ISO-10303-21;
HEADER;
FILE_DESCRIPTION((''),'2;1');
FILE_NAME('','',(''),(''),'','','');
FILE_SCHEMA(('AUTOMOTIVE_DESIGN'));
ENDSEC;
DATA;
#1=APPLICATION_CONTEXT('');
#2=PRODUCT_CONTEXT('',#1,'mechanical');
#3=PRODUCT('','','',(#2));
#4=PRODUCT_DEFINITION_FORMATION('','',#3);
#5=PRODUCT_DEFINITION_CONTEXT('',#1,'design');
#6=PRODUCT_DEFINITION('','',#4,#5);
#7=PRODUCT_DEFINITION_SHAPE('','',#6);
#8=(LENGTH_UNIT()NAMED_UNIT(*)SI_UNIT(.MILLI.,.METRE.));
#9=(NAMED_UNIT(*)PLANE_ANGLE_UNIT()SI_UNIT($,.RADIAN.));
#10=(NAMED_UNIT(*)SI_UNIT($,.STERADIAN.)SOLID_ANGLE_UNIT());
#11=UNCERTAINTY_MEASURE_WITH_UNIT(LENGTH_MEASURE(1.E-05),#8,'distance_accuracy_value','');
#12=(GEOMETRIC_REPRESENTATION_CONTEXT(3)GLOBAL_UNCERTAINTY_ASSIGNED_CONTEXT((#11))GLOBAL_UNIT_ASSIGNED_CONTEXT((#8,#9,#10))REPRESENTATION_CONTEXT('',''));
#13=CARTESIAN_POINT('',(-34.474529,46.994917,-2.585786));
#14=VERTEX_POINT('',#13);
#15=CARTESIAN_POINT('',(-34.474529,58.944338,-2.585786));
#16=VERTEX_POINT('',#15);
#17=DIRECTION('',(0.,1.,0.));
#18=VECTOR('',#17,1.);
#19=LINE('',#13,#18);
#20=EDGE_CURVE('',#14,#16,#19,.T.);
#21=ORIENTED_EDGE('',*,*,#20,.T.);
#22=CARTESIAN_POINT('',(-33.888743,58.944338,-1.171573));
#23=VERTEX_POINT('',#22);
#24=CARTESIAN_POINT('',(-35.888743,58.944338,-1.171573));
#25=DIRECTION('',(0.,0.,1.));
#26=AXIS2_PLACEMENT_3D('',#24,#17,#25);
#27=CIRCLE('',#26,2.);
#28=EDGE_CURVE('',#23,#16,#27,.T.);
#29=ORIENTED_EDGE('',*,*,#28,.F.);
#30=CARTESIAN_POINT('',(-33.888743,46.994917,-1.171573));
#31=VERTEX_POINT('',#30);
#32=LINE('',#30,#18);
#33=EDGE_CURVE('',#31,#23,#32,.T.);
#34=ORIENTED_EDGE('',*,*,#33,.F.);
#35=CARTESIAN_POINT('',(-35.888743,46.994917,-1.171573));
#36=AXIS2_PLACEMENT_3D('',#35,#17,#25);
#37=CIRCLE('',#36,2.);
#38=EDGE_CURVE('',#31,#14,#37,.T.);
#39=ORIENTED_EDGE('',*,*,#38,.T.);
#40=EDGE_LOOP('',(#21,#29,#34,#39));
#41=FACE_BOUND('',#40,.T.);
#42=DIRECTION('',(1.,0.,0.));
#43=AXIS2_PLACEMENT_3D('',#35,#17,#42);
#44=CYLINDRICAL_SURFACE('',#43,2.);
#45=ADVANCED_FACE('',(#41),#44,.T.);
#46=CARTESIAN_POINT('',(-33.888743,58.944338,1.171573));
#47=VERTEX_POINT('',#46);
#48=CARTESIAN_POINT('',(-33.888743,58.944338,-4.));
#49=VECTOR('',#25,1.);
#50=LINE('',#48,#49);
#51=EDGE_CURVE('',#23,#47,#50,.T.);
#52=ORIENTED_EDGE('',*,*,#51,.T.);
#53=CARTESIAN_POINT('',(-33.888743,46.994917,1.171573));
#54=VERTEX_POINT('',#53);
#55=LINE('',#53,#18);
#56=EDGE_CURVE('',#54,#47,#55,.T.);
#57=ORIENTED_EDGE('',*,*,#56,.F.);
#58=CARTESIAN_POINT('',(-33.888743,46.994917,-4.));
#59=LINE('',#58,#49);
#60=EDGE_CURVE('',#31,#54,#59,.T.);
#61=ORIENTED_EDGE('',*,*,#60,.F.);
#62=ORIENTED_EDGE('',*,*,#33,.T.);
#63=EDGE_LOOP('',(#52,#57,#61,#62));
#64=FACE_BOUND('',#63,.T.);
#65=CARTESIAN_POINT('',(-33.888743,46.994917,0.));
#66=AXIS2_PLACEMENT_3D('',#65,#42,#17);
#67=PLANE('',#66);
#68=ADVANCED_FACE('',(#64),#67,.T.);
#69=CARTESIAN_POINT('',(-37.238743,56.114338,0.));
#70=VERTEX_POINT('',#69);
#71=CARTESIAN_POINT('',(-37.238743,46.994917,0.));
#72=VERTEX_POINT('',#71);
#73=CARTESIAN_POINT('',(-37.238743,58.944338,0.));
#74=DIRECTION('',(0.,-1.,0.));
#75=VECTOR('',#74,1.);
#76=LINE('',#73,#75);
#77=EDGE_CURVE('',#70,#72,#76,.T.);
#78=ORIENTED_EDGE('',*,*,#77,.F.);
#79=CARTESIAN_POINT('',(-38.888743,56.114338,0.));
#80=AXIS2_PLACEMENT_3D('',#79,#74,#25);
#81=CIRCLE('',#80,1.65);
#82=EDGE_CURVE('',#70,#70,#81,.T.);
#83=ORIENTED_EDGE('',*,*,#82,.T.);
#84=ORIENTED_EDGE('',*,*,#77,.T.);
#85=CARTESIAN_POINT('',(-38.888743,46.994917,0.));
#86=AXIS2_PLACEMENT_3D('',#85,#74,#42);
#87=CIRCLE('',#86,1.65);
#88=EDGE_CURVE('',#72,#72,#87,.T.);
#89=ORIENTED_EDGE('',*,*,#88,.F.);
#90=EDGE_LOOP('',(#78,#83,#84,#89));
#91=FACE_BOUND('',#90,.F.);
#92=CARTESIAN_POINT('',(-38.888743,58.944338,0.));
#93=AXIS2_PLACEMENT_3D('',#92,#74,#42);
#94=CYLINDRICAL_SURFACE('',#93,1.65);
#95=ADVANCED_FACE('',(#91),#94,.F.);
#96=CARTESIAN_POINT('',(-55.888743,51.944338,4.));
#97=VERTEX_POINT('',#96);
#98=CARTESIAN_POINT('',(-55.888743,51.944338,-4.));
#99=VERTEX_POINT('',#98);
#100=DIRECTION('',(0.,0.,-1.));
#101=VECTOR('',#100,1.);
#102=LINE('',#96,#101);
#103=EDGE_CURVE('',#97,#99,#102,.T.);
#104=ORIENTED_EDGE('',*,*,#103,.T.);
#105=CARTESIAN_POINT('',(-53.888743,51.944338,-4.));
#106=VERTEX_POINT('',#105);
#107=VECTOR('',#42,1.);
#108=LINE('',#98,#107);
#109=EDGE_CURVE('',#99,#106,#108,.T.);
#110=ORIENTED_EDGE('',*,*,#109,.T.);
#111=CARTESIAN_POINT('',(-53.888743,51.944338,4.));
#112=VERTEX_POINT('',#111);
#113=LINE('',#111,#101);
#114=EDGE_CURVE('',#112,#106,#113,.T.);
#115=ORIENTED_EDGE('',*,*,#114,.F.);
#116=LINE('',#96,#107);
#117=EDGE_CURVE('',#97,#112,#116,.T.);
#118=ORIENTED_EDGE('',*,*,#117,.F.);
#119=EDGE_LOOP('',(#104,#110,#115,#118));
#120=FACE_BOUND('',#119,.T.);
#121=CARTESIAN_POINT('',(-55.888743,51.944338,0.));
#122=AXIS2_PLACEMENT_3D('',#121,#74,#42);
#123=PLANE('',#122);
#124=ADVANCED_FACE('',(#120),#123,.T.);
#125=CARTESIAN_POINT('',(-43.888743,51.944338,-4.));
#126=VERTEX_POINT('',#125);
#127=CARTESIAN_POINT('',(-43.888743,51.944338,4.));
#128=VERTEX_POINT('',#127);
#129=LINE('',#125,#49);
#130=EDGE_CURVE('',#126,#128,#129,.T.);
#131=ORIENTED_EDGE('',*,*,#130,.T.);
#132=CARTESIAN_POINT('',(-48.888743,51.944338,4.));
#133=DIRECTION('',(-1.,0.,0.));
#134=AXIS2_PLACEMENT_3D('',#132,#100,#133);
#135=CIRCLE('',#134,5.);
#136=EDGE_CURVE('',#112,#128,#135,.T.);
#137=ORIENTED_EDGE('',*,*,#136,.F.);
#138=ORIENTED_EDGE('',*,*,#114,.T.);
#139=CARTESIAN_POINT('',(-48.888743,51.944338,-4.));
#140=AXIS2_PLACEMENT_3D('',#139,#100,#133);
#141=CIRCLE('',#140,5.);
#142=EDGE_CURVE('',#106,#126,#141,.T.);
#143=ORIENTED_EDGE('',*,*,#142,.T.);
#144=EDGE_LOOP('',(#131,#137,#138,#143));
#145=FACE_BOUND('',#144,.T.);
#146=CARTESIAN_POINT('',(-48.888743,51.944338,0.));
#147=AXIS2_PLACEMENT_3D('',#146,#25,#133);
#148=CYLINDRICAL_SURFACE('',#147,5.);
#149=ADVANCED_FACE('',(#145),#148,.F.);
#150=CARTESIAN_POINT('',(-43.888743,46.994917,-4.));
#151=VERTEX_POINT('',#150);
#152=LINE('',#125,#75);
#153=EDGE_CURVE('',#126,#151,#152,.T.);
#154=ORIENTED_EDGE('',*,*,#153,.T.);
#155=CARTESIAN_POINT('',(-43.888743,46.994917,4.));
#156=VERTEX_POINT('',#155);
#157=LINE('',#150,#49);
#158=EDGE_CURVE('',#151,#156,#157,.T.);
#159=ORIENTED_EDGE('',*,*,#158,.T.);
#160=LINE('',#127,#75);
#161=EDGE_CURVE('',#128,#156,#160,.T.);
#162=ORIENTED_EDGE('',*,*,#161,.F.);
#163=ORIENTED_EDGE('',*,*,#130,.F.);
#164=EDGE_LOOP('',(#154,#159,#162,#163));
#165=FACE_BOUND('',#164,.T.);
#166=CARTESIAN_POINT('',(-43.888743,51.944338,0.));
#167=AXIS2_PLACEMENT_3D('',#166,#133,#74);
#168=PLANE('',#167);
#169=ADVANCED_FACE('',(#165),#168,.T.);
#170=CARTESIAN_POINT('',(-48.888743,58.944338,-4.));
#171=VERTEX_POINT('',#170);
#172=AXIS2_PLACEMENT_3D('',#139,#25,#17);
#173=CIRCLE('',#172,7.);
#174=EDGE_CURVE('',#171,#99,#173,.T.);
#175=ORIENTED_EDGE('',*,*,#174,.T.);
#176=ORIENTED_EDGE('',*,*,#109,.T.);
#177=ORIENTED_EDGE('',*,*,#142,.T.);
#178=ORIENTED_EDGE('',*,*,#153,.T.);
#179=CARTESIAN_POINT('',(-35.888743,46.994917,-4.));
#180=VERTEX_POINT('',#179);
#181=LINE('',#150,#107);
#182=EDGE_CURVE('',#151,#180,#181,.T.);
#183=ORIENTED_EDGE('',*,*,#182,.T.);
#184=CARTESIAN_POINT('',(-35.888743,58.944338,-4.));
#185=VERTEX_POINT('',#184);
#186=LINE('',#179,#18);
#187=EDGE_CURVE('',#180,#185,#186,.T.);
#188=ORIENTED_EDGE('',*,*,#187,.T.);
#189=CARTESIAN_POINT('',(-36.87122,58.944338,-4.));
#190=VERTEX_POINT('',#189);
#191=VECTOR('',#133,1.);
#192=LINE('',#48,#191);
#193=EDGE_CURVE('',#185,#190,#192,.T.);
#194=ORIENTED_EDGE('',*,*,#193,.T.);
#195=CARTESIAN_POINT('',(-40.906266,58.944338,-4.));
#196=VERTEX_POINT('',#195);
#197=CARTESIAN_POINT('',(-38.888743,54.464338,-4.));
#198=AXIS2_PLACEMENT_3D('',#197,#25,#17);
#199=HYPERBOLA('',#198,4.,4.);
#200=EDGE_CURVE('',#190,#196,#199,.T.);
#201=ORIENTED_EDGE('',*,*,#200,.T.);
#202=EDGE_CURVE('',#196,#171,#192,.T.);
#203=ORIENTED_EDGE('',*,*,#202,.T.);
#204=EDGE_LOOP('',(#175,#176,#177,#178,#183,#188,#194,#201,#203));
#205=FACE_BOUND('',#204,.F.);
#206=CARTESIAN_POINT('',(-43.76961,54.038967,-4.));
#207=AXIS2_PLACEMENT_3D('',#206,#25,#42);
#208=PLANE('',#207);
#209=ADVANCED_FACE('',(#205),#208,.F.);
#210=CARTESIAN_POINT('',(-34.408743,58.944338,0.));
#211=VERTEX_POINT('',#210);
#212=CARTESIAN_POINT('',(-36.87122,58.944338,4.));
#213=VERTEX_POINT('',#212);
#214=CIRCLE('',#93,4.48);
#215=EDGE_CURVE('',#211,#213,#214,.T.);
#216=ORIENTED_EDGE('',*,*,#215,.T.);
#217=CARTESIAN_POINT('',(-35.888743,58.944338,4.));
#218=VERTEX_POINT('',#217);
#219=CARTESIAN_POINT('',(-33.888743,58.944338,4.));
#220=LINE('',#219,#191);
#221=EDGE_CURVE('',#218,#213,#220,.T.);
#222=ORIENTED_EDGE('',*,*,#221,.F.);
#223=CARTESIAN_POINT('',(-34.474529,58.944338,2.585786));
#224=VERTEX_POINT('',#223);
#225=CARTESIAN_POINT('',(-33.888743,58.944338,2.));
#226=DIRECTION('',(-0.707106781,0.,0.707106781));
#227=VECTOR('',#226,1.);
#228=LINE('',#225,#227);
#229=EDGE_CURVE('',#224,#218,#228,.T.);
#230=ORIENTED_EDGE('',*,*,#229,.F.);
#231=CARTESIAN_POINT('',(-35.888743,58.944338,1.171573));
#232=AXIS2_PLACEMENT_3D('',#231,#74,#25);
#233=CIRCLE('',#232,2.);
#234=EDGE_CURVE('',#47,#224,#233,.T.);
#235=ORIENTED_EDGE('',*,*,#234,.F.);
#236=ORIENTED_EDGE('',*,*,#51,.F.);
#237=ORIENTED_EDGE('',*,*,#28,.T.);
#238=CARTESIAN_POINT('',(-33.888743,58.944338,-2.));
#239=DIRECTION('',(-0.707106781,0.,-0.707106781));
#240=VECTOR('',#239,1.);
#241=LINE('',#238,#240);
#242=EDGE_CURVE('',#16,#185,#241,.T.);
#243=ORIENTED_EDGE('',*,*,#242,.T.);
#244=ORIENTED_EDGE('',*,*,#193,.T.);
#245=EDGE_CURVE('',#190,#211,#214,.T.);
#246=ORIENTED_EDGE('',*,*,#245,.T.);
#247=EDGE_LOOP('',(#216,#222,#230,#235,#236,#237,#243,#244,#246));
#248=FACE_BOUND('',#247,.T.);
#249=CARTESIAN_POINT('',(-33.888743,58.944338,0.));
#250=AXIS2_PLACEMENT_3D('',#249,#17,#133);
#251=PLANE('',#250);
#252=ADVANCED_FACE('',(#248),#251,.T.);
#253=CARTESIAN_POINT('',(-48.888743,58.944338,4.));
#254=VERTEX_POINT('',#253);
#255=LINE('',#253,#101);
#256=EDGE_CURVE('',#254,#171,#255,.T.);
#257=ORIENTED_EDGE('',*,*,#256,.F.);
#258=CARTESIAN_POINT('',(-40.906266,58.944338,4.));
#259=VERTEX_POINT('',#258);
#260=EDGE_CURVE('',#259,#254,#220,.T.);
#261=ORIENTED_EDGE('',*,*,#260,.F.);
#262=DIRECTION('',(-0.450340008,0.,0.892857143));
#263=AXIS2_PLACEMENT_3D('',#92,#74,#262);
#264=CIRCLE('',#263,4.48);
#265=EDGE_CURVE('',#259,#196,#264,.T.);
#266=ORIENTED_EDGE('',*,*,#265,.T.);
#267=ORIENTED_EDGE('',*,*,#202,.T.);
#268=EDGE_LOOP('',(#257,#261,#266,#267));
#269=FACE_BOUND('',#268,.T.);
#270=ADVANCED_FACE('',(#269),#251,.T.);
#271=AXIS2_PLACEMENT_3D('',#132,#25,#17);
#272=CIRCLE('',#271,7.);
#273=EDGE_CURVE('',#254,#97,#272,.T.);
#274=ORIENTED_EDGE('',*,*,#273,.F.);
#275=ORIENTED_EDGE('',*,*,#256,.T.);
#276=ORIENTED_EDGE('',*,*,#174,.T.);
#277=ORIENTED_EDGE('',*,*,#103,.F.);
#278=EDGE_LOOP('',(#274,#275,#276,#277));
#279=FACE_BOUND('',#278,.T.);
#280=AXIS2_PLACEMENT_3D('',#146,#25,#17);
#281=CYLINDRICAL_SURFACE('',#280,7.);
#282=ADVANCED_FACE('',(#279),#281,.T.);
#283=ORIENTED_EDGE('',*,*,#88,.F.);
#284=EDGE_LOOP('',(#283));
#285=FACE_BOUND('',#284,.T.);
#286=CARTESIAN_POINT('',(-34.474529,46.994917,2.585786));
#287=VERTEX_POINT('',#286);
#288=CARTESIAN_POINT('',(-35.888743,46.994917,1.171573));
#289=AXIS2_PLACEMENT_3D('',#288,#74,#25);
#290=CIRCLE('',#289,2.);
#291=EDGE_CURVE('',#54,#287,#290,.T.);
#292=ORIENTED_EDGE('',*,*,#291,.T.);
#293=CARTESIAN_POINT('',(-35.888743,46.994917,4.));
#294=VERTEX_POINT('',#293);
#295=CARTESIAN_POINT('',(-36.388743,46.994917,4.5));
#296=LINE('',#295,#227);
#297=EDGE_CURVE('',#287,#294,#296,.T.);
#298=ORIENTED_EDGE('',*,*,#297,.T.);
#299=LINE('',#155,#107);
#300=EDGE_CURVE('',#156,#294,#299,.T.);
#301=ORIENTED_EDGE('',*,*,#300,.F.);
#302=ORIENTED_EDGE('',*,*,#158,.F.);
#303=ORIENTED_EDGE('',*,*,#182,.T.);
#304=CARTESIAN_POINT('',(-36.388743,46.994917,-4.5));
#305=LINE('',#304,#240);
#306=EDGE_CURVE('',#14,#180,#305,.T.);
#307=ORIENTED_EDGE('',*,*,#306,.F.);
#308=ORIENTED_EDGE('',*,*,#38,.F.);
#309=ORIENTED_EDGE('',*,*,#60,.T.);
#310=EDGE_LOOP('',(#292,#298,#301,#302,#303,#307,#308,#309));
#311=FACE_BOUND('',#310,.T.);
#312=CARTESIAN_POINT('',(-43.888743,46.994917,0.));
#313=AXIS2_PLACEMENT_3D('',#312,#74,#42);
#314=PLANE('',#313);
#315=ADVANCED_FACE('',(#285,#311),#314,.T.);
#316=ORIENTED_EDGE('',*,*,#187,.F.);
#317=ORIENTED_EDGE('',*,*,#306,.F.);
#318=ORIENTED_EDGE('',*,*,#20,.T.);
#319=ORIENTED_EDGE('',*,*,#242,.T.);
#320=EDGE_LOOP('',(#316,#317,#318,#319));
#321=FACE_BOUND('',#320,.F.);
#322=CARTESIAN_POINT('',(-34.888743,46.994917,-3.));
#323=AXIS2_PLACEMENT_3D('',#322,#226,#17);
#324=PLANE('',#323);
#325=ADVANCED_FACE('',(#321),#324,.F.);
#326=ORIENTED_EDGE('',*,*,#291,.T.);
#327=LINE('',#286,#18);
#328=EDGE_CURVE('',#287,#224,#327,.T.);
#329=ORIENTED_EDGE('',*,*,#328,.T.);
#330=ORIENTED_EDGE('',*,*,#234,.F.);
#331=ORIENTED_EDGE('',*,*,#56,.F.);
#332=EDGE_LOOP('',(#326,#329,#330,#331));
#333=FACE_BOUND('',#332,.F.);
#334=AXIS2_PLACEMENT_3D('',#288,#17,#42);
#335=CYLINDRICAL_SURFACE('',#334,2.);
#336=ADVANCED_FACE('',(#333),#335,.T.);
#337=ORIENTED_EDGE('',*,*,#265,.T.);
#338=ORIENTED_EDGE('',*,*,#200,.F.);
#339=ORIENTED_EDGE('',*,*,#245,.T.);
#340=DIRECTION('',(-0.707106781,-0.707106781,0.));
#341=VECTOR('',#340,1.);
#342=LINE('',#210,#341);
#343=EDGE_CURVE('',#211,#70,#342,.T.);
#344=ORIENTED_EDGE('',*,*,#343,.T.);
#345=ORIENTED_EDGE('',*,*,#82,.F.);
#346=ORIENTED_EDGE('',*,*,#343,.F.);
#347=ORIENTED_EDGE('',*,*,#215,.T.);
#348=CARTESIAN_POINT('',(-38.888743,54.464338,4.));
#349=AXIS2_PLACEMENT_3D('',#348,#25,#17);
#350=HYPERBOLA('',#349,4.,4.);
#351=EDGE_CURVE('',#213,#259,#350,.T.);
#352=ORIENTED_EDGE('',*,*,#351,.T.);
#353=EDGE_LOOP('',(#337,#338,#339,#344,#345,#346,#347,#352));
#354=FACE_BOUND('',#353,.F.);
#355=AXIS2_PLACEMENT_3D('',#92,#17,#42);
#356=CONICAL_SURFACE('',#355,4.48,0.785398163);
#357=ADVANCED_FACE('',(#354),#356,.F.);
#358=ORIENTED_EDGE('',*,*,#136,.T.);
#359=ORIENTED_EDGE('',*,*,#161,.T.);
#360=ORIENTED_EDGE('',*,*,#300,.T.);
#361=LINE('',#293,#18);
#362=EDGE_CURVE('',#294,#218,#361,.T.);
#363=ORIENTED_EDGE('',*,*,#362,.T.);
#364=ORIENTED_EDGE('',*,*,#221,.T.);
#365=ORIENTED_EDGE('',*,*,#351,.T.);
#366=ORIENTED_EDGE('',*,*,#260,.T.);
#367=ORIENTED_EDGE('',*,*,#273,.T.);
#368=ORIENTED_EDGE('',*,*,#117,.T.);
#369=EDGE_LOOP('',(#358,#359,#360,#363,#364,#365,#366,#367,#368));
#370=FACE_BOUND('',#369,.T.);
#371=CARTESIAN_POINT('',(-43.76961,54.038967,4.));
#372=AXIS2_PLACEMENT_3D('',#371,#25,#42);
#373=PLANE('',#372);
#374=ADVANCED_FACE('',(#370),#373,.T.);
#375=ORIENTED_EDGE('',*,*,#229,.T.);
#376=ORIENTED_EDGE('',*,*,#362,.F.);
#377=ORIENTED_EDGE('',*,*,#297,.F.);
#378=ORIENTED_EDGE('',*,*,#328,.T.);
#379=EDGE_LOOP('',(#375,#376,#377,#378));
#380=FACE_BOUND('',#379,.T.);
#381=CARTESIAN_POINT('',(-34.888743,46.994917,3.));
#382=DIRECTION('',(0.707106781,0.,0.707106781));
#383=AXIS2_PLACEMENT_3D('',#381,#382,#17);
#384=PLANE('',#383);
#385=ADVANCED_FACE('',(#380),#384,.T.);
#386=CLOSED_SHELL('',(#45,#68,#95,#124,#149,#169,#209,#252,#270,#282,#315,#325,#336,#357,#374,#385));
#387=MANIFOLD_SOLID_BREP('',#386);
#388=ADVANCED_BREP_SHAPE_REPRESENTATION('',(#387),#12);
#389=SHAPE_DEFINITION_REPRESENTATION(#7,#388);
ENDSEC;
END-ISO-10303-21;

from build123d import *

# Parameters (mm, degrees)
F1_DEPTH       = 4
F3_D           = 3.3
F3_CSINK_D     = 8.96
F3_CSINK_ANGLE = 90
F4_SIZE        = 2
F5_R           = 2


with BuildPart() as f1:
    # F0 (on Top) → F1 (new body, symmetric)
    with BuildSketch(Plane.XY):
        with BuildLine():
            ThreePointArc((-53.8887429237, 51.9443377852), (-48.8887429237, 56.9443377852), (-43.8887429237, 51.9443377852))
            Line((-43.8887429237, 51.9443377852), (-43.8887429237, 46.9949170947))
            Line((-43.8887429237, 46.9949170947), (-33.8887429237, 46.9949170947))
            Line((-33.8887429237, 46.9949170947), (-33.8887429237, 58.9443377852))
            Line((-33.8887429237, 58.9443377852), (-48.8887429237, 58.9443377852))
            ThreePointArc((-48.8887429237, 58.9443377852), (-53.838490392, 56.8940852535), (-55.8887429237, 51.9443377852))
            Line((-55.8887429237, 51.9443377852), (-53.8887429237, 51.9443377852))
        make_face()
    extrude(amount=F1_DEPTH, both=True)

    # F3 (through all)
    with Locations(Plane(origin=(0, 58.9443377852, 0), x_dir=(-1, 0, 0), z_dir=(0, 1, 0))):
        with Locations((38.8887429237, 0)):
            CounterSinkHole(F3_D / 2, F3_CSINK_D / 2, counter_sink_angle=F3_CSINK_ANGLE)

    # F4
    f4_edges = [f1.edges().sort_by_distance(p)[0] for p in [
        (-33.888743, 52.969627, -4),
        (-33.888743, 52.969627, 4),
    ]]
    chamfer(f4_edges, length=F4_SIZE)

    # F5
    f5_edges = [f1.edges().sort_by_distance(p)[0] for p in [
        (-33.888743, 52.969627, 2),
        (-33.888743, 52.969627, -2),
    ]]
    fillet(f5_edges, radius=F5_R)


solid = f1.part
